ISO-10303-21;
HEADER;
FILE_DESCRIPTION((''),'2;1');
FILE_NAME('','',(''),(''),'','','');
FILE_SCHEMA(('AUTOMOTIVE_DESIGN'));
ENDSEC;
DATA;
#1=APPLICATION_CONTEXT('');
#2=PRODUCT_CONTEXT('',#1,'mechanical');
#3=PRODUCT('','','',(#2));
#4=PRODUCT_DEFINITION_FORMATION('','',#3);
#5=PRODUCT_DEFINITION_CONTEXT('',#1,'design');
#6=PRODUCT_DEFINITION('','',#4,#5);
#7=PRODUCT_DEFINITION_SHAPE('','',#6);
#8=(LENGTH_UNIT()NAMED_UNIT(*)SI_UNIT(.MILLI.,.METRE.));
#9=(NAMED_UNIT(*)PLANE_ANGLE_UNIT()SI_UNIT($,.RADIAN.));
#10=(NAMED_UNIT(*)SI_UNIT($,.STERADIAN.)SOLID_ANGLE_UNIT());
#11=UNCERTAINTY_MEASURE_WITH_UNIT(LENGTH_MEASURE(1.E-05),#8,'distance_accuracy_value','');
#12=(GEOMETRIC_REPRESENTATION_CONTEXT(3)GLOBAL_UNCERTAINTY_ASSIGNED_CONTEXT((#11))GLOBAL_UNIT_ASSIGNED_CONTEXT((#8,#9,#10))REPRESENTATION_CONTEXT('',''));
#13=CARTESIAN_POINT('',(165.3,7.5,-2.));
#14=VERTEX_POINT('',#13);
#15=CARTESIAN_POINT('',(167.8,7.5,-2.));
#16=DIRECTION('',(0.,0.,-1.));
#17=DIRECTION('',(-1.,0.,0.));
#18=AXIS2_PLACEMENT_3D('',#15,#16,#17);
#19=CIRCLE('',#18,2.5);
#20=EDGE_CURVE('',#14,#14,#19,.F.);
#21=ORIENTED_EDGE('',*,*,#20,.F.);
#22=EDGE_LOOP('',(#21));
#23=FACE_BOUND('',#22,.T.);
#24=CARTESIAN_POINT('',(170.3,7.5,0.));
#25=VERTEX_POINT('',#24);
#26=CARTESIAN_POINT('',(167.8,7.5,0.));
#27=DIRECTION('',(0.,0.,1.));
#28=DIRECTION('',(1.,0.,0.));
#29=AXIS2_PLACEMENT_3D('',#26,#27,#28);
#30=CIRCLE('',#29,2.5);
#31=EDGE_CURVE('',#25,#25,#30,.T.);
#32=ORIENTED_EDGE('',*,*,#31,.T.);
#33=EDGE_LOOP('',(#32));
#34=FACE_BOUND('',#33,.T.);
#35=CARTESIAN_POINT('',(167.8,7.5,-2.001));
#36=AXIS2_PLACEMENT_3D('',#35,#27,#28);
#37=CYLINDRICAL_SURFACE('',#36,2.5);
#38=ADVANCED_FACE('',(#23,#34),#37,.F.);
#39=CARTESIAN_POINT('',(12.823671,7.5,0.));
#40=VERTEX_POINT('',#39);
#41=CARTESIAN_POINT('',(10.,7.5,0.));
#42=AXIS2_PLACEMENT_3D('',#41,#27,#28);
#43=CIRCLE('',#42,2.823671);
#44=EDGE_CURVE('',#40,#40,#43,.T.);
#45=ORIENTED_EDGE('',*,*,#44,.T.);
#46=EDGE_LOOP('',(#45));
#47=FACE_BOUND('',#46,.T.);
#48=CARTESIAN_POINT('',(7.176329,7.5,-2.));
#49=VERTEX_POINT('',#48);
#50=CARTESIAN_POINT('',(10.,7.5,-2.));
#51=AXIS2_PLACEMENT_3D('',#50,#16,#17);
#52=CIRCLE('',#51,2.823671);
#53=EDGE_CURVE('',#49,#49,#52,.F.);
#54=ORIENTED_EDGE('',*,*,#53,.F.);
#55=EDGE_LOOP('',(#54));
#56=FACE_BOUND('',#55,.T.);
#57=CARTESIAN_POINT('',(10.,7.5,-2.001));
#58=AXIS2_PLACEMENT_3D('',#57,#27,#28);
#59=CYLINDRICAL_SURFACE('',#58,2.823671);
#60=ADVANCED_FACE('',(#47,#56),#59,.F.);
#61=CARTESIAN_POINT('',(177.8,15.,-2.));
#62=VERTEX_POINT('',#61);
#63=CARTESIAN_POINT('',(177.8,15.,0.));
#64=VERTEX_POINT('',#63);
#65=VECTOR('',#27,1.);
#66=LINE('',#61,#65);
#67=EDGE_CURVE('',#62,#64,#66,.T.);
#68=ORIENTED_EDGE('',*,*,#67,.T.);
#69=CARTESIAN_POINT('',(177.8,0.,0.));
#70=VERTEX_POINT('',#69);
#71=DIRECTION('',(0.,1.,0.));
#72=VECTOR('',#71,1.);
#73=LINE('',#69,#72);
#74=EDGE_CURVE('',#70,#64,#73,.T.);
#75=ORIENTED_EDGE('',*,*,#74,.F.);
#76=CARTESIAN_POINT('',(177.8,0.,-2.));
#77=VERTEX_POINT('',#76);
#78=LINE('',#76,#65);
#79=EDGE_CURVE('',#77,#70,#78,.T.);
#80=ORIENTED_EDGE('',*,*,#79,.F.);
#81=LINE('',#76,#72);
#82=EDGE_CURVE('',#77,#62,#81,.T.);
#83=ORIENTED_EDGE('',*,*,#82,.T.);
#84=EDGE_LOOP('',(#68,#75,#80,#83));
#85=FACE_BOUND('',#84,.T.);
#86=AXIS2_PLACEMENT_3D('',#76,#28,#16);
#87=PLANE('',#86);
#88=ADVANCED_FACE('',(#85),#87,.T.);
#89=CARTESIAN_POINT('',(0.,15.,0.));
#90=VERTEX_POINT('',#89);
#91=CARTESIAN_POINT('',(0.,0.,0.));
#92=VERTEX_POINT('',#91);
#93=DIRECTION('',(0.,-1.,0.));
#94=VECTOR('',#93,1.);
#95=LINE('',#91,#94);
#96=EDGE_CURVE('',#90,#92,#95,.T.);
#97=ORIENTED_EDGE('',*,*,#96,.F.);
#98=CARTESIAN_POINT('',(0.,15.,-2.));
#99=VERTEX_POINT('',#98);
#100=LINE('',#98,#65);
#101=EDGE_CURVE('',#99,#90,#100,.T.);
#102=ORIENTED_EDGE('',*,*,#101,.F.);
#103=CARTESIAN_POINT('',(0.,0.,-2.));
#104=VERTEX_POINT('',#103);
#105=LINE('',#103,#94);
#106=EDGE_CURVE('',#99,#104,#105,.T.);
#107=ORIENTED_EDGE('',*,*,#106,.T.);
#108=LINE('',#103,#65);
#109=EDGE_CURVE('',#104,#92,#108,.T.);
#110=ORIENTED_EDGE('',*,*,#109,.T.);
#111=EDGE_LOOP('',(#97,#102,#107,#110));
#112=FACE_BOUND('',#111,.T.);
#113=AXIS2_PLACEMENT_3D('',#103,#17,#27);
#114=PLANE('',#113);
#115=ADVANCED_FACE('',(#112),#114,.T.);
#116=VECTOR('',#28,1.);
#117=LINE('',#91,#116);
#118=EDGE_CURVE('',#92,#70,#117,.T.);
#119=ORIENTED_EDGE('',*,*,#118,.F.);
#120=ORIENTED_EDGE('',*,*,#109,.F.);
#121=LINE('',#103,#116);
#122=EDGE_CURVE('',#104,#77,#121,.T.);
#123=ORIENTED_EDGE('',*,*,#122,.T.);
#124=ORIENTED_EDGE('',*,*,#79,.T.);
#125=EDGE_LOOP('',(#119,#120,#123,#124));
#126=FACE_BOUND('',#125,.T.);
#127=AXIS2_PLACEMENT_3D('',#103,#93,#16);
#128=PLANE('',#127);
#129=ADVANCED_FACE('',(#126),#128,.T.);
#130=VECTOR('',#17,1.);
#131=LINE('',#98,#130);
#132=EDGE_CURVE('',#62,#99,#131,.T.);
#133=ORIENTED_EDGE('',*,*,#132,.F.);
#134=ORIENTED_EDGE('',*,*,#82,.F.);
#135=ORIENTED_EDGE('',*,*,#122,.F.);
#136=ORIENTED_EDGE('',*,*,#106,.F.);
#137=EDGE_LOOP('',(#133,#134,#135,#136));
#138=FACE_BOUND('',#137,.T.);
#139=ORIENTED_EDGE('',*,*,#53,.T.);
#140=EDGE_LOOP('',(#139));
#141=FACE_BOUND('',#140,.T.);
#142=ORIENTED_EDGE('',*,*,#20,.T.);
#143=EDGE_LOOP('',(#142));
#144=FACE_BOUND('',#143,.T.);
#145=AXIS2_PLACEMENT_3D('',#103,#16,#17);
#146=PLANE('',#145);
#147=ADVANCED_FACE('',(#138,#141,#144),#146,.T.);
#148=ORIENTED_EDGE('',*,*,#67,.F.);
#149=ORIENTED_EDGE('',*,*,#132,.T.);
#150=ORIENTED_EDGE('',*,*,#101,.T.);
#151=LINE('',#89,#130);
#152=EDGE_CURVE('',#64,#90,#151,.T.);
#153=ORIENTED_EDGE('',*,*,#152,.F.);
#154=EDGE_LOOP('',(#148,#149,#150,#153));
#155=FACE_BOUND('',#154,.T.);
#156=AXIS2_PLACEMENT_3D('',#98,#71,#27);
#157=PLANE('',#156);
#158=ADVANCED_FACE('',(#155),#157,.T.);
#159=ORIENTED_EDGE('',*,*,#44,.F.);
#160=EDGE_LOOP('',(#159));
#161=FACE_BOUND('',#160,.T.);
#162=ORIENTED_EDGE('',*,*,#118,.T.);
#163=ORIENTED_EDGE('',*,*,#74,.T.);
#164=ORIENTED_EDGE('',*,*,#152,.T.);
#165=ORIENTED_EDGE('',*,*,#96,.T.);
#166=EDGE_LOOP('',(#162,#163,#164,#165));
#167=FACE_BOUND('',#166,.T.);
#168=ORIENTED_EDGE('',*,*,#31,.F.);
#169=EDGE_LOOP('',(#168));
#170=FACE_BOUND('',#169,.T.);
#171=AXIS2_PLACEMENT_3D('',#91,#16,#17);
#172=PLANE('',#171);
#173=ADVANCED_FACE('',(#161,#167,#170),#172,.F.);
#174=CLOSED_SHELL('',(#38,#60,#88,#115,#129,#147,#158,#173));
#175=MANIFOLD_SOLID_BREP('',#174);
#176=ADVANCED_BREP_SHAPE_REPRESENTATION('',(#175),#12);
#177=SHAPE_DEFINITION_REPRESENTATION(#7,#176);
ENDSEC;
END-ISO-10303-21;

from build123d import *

# Parameters (mm, degrees)
SKETCH1_W          = 177.8
SKETCH1_H          = 15
BASE_FLANGE1_DEPTH = 2
CUT_EXTRUDE1_REACH = 180.443
SKETCH6_R          = 2.823671173
SKETCH6_R_2        = 2.5


# Sheet-metal steps are written as plain solids
with BuildPart() as part:
    # Sketch1 → Base-Flange1 (new body)
    with BuildSketch(Plane.XY):
        with Locations((88.9, 7.5)):
            Rectangle(SKETCH1_W, SKETCH1_H)
    extrude(amount=-BASE_FLANGE1_DEPTH)

    # Sketch6 → Cut-Extrude1 (cut, up to next)
    with BuildSketch(Plane.XY, mode=Mode.PRIVATE) as cut_extrude1_sk1:
        with Locations((10, 7.5)):
            Circle(SKETCH6_R)
    cut_extrude1_tool1 = extrude(cut_extrude1_sk1.sketch, amount=-CUT_EXTRUDE1_REACH, mode=Mode.PRIVATE) & part.part
    # Sketch6 → Cut-Extrude1 (cut, up to next)
    with BuildSketch(Plane.XY, mode=Mode.PRIVATE) as cut_extrude1_sk2:
        with Locations((167.8, 7.5)):
            Circle(SKETCH6_R_2)
    cut_extrude1_tool2 = extrude(cut_extrude1_sk2.sketch, amount=-CUT_EXTRUDE1_REACH, mode=Mode.PRIVATE) & part.part
    add(cut_extrude1_tool1.solids().sort_by_distance((10, 7.5, 0))[0], mode=Mode.SUBTRACT)
    add(cut_extrude1_tool2.solids().sort_by_distance((167.8, 7.5, 0))[0], mode=Mode.SUBTRACT)


solid = part.part
